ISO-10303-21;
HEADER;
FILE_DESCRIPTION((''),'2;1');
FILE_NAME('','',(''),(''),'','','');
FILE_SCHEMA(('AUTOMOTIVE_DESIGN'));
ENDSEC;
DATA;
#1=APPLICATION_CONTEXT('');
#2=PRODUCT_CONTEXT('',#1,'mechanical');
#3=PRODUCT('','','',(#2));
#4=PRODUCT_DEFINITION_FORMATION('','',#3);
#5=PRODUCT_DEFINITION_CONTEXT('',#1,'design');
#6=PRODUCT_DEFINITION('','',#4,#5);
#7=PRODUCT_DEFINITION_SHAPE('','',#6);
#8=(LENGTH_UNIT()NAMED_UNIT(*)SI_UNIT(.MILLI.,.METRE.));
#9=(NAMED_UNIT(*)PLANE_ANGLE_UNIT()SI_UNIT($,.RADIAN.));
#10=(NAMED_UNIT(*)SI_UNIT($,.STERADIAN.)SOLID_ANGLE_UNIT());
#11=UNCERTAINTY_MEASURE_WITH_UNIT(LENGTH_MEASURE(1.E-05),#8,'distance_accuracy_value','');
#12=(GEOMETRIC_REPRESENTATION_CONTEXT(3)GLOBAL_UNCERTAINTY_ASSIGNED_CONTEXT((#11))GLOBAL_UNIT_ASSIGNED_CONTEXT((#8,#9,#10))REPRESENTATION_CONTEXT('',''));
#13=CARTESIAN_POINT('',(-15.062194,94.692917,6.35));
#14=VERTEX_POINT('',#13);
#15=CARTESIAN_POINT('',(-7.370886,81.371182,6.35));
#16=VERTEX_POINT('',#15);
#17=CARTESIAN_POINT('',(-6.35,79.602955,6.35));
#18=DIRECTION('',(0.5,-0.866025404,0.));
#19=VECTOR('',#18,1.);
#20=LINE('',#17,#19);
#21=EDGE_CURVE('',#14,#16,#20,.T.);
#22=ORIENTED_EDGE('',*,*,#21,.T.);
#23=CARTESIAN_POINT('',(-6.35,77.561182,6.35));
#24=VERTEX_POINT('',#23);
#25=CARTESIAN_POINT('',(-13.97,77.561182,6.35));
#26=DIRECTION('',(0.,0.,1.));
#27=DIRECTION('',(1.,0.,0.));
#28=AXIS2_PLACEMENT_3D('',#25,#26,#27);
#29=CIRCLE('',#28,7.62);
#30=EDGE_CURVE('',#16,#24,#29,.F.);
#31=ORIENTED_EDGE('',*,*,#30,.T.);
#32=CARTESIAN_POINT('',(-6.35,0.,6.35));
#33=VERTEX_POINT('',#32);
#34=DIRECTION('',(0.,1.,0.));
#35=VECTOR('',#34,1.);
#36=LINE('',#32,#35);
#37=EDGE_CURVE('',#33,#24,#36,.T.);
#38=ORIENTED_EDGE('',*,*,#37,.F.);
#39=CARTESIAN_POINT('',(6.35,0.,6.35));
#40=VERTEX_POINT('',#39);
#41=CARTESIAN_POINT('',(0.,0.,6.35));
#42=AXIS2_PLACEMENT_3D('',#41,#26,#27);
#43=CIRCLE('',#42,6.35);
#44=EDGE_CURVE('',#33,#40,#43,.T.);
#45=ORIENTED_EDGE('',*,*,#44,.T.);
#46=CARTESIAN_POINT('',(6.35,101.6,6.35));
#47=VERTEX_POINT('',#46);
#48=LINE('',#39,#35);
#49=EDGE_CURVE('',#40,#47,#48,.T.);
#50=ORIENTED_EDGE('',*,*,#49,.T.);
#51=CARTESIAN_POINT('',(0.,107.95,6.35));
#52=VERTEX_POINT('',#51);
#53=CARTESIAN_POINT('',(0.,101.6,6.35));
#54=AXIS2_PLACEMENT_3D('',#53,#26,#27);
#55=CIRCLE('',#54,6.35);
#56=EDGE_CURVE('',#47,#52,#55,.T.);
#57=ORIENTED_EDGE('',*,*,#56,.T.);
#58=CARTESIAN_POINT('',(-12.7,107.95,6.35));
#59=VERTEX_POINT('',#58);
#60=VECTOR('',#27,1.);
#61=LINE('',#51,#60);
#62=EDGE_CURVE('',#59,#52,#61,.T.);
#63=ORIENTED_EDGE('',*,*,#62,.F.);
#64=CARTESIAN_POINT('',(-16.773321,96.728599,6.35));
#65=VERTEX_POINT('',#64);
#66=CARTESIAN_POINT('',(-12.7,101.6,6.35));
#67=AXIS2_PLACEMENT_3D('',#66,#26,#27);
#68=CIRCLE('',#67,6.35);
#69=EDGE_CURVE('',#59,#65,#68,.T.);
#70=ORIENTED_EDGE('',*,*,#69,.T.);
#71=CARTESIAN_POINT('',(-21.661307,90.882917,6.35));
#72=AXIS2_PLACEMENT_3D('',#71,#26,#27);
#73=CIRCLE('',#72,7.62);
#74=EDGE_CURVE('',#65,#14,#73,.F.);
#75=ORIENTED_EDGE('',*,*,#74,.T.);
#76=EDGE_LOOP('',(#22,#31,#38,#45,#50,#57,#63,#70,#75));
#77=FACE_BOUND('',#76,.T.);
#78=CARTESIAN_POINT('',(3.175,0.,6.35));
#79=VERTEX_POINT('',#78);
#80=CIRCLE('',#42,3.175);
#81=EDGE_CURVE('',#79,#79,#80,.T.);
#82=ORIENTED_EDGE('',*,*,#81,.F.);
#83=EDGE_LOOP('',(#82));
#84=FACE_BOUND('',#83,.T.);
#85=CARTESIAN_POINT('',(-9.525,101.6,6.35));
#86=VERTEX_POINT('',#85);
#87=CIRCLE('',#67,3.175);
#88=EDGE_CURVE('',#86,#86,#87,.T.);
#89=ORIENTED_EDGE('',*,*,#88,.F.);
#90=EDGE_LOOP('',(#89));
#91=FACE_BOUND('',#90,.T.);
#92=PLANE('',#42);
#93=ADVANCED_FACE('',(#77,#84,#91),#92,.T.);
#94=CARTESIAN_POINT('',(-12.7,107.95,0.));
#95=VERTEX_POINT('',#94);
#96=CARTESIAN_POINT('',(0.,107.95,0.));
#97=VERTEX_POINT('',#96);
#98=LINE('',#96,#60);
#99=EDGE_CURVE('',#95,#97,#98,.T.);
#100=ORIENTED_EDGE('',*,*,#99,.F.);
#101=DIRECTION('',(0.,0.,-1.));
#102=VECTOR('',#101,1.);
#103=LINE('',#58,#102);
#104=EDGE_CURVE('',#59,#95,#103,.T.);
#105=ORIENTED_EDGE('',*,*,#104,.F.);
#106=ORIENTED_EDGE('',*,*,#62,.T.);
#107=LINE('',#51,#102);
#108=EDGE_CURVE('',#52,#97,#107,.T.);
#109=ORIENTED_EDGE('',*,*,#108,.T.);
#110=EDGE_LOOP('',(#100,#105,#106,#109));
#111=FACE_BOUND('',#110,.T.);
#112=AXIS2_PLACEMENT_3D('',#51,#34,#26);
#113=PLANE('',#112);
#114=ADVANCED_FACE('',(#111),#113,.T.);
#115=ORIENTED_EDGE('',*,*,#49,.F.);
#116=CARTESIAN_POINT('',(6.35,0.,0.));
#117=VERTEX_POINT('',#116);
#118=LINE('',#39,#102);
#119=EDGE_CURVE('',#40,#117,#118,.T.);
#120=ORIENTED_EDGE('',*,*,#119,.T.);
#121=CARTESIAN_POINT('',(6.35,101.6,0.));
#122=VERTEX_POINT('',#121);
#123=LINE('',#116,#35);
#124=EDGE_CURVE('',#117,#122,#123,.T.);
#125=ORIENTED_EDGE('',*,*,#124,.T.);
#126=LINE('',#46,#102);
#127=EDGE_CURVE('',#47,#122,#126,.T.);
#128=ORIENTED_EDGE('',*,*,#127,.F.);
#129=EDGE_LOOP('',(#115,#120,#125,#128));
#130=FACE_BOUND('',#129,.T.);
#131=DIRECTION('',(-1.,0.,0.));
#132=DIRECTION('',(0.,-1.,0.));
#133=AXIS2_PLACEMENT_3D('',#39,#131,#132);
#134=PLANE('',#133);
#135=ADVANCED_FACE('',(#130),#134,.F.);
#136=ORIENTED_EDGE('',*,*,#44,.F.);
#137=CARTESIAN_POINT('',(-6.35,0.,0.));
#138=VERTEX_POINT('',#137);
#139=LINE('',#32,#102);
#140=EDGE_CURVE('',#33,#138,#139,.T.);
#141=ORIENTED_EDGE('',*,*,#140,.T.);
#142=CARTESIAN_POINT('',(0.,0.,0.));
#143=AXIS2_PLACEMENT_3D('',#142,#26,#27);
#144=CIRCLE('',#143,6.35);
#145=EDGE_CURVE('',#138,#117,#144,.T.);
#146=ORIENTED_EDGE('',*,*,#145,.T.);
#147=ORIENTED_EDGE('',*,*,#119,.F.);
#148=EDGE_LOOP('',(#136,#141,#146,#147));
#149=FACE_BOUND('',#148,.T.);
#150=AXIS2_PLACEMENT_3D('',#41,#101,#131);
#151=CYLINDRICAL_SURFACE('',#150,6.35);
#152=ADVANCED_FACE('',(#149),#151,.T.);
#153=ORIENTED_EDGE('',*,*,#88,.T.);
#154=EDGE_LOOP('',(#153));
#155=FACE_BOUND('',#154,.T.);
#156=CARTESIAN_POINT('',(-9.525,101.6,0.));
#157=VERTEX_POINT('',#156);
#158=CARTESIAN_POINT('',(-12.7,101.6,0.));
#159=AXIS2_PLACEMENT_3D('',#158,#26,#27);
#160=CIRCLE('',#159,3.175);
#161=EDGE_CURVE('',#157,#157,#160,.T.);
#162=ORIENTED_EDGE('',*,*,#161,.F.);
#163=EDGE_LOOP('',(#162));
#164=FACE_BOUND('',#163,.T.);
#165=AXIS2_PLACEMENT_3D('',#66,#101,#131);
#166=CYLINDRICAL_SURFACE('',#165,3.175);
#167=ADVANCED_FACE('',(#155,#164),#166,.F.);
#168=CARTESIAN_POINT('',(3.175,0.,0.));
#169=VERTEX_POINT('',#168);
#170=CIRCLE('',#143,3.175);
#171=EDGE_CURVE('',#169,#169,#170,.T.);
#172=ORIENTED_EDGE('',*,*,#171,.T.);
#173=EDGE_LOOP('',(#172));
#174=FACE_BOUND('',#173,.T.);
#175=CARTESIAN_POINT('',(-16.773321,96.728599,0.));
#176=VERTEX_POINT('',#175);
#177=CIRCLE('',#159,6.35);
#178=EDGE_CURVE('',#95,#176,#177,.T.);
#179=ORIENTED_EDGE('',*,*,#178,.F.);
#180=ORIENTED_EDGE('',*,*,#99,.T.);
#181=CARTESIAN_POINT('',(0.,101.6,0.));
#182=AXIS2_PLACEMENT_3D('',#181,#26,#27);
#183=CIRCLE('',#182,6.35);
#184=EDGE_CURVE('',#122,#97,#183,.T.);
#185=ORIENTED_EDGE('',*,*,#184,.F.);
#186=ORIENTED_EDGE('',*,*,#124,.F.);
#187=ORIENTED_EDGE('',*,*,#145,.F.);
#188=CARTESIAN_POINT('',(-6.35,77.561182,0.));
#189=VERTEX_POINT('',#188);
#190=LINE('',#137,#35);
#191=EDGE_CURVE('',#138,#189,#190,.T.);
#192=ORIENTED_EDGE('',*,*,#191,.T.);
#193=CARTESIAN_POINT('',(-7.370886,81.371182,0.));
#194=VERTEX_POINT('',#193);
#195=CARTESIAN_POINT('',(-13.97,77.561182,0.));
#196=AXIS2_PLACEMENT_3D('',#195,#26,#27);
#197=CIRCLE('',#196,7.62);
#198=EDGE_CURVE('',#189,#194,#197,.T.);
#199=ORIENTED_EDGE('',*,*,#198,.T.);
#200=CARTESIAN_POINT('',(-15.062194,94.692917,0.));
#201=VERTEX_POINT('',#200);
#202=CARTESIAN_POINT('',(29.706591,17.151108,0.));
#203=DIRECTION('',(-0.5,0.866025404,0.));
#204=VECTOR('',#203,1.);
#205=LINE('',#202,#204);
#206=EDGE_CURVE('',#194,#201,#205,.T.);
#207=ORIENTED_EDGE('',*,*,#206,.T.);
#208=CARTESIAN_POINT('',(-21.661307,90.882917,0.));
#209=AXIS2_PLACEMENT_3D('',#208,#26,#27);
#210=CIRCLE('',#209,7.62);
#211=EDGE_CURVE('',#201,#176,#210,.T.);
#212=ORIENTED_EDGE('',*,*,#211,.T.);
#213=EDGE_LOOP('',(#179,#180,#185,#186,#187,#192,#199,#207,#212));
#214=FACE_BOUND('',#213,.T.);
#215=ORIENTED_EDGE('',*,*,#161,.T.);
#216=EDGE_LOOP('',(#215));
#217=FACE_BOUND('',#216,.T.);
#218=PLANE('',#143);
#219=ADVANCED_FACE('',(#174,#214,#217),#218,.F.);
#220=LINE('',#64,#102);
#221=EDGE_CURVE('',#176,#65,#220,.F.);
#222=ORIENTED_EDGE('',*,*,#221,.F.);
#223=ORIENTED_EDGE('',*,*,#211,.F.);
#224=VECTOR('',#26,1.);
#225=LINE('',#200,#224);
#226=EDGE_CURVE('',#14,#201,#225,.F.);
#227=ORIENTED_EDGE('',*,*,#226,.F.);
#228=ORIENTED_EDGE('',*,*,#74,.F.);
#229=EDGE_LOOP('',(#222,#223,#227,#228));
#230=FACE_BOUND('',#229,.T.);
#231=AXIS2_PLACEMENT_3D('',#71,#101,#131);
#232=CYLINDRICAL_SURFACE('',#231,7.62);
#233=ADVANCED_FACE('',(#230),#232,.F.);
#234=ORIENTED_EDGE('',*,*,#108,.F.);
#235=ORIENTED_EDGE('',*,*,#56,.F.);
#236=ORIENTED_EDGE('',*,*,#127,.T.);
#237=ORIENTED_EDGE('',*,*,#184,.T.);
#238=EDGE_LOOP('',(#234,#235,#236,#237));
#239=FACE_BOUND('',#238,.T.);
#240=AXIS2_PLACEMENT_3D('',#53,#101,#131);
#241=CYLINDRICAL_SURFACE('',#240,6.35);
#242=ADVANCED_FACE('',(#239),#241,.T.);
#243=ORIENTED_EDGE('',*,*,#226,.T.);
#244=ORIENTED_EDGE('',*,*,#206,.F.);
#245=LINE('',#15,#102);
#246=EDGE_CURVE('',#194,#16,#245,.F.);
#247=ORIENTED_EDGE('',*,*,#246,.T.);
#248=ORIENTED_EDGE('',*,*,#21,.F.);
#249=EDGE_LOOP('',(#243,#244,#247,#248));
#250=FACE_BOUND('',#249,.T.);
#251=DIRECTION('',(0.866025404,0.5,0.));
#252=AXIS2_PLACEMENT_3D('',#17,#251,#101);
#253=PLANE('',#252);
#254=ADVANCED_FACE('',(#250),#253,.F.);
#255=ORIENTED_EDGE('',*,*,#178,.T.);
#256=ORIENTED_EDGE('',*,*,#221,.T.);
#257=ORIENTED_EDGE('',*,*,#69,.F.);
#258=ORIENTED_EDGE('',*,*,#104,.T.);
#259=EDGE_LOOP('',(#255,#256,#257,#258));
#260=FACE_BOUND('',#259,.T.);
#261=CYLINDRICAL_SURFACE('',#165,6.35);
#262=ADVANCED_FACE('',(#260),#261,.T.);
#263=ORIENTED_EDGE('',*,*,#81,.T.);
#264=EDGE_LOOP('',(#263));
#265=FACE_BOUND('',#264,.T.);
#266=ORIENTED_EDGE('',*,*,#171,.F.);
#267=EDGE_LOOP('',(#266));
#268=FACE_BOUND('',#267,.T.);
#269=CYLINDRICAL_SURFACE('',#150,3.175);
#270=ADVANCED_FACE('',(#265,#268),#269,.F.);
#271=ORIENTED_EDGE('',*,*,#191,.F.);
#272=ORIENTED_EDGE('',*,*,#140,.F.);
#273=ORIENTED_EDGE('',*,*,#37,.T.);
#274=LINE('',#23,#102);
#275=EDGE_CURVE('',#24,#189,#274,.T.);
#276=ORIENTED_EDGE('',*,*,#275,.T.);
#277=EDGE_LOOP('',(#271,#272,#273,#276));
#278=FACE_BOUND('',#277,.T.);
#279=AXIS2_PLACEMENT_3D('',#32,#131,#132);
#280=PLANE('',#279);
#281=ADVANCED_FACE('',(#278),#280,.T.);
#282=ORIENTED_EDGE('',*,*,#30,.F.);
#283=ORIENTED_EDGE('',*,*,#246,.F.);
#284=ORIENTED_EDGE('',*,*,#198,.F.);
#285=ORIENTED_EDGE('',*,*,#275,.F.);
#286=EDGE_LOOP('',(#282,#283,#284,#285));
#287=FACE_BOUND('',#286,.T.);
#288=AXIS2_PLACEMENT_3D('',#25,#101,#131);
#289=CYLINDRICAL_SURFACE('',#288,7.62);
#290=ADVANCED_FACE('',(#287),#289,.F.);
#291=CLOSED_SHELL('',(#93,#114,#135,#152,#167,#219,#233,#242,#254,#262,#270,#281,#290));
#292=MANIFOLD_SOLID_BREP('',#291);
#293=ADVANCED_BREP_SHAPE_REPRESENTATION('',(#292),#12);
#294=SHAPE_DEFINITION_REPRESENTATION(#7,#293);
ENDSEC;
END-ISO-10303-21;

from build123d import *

# Parameters (mm, degrees)
SKETCH1_R           = 3.175
BOSS_EXTRUDE1_DEPTH = 6.35
CHAMFER1_START      = 34.302216058
CHAMFER1_OUTLINE_W  = 19.05
CHAMFER1_OUTLINE_H  = 6.35
CHAMFER1_DEPTH      = 8.674261314
FILLET1_R           = 7.62


with BuildPart() as part:
    # Sketch1 → Boss-Extrude1 (new body)
    with BuildSketch(Plane.XY):
        with BuildLine():
            Line((-6.35, 0), (-6.35, 95.25))
            Line((-6.35, 95.25), (-12.7, 95.25))
            ThreePointArc((-12.7, 95.25), (-19.05, 101.6), (-12.7, 107.95))
            Line((-12.7, 107.95), (0, 107.95))
            ThreePointArc((0, 107.95), (4.490128061, 106.090128061), (6.35, 101.6))
            Line((6.35, 101.6), (6.35, 0))
            ThreePointArc((6.35, 0), (0, -6.35), (-6.35, 0))
        make_face()
        Circle(SKETCH1_R, mode=Mode.SUBTRACT)
        with Locations((-12.7, 101.6)):
            Circle(SKETCH1_R, mode=Mode.SUBTRACT)
    extrude(amount=BOSS_EXTRUDE1_DEPTH)

    # Chamfer1: read off the stored shape, not the designer's step
    # Chamfer1 outline → Chamfer1 (add)
    with BuildSketch(Plane(origin=(0, 0, 0), x_dir=(0.49999999999999195, -0.8660254037844434, 0), z_dir=(0.8660254037844433, 0.4999999999999921, 0)).offset(CHAMFER1_START)):
        with Locations((-81.638181024, -3.175)):
            Rectangle(CHAMFER1_OUTLINE_W, CHAMFER1_OUTLINE_H)
    extrude(amount=CHAMFER1_DEPTH)

    # Fillet1
    fillet1_edges = [part.edges().sort_by_distance(p)[0] for p in [
        (-6.35, 79.602954743, 3.175),
        (-15.875, 96.100738686, 3.175),
    ]]
    fillet(fillet1_edges, radius=FILLET1_R)


solid = part.part
